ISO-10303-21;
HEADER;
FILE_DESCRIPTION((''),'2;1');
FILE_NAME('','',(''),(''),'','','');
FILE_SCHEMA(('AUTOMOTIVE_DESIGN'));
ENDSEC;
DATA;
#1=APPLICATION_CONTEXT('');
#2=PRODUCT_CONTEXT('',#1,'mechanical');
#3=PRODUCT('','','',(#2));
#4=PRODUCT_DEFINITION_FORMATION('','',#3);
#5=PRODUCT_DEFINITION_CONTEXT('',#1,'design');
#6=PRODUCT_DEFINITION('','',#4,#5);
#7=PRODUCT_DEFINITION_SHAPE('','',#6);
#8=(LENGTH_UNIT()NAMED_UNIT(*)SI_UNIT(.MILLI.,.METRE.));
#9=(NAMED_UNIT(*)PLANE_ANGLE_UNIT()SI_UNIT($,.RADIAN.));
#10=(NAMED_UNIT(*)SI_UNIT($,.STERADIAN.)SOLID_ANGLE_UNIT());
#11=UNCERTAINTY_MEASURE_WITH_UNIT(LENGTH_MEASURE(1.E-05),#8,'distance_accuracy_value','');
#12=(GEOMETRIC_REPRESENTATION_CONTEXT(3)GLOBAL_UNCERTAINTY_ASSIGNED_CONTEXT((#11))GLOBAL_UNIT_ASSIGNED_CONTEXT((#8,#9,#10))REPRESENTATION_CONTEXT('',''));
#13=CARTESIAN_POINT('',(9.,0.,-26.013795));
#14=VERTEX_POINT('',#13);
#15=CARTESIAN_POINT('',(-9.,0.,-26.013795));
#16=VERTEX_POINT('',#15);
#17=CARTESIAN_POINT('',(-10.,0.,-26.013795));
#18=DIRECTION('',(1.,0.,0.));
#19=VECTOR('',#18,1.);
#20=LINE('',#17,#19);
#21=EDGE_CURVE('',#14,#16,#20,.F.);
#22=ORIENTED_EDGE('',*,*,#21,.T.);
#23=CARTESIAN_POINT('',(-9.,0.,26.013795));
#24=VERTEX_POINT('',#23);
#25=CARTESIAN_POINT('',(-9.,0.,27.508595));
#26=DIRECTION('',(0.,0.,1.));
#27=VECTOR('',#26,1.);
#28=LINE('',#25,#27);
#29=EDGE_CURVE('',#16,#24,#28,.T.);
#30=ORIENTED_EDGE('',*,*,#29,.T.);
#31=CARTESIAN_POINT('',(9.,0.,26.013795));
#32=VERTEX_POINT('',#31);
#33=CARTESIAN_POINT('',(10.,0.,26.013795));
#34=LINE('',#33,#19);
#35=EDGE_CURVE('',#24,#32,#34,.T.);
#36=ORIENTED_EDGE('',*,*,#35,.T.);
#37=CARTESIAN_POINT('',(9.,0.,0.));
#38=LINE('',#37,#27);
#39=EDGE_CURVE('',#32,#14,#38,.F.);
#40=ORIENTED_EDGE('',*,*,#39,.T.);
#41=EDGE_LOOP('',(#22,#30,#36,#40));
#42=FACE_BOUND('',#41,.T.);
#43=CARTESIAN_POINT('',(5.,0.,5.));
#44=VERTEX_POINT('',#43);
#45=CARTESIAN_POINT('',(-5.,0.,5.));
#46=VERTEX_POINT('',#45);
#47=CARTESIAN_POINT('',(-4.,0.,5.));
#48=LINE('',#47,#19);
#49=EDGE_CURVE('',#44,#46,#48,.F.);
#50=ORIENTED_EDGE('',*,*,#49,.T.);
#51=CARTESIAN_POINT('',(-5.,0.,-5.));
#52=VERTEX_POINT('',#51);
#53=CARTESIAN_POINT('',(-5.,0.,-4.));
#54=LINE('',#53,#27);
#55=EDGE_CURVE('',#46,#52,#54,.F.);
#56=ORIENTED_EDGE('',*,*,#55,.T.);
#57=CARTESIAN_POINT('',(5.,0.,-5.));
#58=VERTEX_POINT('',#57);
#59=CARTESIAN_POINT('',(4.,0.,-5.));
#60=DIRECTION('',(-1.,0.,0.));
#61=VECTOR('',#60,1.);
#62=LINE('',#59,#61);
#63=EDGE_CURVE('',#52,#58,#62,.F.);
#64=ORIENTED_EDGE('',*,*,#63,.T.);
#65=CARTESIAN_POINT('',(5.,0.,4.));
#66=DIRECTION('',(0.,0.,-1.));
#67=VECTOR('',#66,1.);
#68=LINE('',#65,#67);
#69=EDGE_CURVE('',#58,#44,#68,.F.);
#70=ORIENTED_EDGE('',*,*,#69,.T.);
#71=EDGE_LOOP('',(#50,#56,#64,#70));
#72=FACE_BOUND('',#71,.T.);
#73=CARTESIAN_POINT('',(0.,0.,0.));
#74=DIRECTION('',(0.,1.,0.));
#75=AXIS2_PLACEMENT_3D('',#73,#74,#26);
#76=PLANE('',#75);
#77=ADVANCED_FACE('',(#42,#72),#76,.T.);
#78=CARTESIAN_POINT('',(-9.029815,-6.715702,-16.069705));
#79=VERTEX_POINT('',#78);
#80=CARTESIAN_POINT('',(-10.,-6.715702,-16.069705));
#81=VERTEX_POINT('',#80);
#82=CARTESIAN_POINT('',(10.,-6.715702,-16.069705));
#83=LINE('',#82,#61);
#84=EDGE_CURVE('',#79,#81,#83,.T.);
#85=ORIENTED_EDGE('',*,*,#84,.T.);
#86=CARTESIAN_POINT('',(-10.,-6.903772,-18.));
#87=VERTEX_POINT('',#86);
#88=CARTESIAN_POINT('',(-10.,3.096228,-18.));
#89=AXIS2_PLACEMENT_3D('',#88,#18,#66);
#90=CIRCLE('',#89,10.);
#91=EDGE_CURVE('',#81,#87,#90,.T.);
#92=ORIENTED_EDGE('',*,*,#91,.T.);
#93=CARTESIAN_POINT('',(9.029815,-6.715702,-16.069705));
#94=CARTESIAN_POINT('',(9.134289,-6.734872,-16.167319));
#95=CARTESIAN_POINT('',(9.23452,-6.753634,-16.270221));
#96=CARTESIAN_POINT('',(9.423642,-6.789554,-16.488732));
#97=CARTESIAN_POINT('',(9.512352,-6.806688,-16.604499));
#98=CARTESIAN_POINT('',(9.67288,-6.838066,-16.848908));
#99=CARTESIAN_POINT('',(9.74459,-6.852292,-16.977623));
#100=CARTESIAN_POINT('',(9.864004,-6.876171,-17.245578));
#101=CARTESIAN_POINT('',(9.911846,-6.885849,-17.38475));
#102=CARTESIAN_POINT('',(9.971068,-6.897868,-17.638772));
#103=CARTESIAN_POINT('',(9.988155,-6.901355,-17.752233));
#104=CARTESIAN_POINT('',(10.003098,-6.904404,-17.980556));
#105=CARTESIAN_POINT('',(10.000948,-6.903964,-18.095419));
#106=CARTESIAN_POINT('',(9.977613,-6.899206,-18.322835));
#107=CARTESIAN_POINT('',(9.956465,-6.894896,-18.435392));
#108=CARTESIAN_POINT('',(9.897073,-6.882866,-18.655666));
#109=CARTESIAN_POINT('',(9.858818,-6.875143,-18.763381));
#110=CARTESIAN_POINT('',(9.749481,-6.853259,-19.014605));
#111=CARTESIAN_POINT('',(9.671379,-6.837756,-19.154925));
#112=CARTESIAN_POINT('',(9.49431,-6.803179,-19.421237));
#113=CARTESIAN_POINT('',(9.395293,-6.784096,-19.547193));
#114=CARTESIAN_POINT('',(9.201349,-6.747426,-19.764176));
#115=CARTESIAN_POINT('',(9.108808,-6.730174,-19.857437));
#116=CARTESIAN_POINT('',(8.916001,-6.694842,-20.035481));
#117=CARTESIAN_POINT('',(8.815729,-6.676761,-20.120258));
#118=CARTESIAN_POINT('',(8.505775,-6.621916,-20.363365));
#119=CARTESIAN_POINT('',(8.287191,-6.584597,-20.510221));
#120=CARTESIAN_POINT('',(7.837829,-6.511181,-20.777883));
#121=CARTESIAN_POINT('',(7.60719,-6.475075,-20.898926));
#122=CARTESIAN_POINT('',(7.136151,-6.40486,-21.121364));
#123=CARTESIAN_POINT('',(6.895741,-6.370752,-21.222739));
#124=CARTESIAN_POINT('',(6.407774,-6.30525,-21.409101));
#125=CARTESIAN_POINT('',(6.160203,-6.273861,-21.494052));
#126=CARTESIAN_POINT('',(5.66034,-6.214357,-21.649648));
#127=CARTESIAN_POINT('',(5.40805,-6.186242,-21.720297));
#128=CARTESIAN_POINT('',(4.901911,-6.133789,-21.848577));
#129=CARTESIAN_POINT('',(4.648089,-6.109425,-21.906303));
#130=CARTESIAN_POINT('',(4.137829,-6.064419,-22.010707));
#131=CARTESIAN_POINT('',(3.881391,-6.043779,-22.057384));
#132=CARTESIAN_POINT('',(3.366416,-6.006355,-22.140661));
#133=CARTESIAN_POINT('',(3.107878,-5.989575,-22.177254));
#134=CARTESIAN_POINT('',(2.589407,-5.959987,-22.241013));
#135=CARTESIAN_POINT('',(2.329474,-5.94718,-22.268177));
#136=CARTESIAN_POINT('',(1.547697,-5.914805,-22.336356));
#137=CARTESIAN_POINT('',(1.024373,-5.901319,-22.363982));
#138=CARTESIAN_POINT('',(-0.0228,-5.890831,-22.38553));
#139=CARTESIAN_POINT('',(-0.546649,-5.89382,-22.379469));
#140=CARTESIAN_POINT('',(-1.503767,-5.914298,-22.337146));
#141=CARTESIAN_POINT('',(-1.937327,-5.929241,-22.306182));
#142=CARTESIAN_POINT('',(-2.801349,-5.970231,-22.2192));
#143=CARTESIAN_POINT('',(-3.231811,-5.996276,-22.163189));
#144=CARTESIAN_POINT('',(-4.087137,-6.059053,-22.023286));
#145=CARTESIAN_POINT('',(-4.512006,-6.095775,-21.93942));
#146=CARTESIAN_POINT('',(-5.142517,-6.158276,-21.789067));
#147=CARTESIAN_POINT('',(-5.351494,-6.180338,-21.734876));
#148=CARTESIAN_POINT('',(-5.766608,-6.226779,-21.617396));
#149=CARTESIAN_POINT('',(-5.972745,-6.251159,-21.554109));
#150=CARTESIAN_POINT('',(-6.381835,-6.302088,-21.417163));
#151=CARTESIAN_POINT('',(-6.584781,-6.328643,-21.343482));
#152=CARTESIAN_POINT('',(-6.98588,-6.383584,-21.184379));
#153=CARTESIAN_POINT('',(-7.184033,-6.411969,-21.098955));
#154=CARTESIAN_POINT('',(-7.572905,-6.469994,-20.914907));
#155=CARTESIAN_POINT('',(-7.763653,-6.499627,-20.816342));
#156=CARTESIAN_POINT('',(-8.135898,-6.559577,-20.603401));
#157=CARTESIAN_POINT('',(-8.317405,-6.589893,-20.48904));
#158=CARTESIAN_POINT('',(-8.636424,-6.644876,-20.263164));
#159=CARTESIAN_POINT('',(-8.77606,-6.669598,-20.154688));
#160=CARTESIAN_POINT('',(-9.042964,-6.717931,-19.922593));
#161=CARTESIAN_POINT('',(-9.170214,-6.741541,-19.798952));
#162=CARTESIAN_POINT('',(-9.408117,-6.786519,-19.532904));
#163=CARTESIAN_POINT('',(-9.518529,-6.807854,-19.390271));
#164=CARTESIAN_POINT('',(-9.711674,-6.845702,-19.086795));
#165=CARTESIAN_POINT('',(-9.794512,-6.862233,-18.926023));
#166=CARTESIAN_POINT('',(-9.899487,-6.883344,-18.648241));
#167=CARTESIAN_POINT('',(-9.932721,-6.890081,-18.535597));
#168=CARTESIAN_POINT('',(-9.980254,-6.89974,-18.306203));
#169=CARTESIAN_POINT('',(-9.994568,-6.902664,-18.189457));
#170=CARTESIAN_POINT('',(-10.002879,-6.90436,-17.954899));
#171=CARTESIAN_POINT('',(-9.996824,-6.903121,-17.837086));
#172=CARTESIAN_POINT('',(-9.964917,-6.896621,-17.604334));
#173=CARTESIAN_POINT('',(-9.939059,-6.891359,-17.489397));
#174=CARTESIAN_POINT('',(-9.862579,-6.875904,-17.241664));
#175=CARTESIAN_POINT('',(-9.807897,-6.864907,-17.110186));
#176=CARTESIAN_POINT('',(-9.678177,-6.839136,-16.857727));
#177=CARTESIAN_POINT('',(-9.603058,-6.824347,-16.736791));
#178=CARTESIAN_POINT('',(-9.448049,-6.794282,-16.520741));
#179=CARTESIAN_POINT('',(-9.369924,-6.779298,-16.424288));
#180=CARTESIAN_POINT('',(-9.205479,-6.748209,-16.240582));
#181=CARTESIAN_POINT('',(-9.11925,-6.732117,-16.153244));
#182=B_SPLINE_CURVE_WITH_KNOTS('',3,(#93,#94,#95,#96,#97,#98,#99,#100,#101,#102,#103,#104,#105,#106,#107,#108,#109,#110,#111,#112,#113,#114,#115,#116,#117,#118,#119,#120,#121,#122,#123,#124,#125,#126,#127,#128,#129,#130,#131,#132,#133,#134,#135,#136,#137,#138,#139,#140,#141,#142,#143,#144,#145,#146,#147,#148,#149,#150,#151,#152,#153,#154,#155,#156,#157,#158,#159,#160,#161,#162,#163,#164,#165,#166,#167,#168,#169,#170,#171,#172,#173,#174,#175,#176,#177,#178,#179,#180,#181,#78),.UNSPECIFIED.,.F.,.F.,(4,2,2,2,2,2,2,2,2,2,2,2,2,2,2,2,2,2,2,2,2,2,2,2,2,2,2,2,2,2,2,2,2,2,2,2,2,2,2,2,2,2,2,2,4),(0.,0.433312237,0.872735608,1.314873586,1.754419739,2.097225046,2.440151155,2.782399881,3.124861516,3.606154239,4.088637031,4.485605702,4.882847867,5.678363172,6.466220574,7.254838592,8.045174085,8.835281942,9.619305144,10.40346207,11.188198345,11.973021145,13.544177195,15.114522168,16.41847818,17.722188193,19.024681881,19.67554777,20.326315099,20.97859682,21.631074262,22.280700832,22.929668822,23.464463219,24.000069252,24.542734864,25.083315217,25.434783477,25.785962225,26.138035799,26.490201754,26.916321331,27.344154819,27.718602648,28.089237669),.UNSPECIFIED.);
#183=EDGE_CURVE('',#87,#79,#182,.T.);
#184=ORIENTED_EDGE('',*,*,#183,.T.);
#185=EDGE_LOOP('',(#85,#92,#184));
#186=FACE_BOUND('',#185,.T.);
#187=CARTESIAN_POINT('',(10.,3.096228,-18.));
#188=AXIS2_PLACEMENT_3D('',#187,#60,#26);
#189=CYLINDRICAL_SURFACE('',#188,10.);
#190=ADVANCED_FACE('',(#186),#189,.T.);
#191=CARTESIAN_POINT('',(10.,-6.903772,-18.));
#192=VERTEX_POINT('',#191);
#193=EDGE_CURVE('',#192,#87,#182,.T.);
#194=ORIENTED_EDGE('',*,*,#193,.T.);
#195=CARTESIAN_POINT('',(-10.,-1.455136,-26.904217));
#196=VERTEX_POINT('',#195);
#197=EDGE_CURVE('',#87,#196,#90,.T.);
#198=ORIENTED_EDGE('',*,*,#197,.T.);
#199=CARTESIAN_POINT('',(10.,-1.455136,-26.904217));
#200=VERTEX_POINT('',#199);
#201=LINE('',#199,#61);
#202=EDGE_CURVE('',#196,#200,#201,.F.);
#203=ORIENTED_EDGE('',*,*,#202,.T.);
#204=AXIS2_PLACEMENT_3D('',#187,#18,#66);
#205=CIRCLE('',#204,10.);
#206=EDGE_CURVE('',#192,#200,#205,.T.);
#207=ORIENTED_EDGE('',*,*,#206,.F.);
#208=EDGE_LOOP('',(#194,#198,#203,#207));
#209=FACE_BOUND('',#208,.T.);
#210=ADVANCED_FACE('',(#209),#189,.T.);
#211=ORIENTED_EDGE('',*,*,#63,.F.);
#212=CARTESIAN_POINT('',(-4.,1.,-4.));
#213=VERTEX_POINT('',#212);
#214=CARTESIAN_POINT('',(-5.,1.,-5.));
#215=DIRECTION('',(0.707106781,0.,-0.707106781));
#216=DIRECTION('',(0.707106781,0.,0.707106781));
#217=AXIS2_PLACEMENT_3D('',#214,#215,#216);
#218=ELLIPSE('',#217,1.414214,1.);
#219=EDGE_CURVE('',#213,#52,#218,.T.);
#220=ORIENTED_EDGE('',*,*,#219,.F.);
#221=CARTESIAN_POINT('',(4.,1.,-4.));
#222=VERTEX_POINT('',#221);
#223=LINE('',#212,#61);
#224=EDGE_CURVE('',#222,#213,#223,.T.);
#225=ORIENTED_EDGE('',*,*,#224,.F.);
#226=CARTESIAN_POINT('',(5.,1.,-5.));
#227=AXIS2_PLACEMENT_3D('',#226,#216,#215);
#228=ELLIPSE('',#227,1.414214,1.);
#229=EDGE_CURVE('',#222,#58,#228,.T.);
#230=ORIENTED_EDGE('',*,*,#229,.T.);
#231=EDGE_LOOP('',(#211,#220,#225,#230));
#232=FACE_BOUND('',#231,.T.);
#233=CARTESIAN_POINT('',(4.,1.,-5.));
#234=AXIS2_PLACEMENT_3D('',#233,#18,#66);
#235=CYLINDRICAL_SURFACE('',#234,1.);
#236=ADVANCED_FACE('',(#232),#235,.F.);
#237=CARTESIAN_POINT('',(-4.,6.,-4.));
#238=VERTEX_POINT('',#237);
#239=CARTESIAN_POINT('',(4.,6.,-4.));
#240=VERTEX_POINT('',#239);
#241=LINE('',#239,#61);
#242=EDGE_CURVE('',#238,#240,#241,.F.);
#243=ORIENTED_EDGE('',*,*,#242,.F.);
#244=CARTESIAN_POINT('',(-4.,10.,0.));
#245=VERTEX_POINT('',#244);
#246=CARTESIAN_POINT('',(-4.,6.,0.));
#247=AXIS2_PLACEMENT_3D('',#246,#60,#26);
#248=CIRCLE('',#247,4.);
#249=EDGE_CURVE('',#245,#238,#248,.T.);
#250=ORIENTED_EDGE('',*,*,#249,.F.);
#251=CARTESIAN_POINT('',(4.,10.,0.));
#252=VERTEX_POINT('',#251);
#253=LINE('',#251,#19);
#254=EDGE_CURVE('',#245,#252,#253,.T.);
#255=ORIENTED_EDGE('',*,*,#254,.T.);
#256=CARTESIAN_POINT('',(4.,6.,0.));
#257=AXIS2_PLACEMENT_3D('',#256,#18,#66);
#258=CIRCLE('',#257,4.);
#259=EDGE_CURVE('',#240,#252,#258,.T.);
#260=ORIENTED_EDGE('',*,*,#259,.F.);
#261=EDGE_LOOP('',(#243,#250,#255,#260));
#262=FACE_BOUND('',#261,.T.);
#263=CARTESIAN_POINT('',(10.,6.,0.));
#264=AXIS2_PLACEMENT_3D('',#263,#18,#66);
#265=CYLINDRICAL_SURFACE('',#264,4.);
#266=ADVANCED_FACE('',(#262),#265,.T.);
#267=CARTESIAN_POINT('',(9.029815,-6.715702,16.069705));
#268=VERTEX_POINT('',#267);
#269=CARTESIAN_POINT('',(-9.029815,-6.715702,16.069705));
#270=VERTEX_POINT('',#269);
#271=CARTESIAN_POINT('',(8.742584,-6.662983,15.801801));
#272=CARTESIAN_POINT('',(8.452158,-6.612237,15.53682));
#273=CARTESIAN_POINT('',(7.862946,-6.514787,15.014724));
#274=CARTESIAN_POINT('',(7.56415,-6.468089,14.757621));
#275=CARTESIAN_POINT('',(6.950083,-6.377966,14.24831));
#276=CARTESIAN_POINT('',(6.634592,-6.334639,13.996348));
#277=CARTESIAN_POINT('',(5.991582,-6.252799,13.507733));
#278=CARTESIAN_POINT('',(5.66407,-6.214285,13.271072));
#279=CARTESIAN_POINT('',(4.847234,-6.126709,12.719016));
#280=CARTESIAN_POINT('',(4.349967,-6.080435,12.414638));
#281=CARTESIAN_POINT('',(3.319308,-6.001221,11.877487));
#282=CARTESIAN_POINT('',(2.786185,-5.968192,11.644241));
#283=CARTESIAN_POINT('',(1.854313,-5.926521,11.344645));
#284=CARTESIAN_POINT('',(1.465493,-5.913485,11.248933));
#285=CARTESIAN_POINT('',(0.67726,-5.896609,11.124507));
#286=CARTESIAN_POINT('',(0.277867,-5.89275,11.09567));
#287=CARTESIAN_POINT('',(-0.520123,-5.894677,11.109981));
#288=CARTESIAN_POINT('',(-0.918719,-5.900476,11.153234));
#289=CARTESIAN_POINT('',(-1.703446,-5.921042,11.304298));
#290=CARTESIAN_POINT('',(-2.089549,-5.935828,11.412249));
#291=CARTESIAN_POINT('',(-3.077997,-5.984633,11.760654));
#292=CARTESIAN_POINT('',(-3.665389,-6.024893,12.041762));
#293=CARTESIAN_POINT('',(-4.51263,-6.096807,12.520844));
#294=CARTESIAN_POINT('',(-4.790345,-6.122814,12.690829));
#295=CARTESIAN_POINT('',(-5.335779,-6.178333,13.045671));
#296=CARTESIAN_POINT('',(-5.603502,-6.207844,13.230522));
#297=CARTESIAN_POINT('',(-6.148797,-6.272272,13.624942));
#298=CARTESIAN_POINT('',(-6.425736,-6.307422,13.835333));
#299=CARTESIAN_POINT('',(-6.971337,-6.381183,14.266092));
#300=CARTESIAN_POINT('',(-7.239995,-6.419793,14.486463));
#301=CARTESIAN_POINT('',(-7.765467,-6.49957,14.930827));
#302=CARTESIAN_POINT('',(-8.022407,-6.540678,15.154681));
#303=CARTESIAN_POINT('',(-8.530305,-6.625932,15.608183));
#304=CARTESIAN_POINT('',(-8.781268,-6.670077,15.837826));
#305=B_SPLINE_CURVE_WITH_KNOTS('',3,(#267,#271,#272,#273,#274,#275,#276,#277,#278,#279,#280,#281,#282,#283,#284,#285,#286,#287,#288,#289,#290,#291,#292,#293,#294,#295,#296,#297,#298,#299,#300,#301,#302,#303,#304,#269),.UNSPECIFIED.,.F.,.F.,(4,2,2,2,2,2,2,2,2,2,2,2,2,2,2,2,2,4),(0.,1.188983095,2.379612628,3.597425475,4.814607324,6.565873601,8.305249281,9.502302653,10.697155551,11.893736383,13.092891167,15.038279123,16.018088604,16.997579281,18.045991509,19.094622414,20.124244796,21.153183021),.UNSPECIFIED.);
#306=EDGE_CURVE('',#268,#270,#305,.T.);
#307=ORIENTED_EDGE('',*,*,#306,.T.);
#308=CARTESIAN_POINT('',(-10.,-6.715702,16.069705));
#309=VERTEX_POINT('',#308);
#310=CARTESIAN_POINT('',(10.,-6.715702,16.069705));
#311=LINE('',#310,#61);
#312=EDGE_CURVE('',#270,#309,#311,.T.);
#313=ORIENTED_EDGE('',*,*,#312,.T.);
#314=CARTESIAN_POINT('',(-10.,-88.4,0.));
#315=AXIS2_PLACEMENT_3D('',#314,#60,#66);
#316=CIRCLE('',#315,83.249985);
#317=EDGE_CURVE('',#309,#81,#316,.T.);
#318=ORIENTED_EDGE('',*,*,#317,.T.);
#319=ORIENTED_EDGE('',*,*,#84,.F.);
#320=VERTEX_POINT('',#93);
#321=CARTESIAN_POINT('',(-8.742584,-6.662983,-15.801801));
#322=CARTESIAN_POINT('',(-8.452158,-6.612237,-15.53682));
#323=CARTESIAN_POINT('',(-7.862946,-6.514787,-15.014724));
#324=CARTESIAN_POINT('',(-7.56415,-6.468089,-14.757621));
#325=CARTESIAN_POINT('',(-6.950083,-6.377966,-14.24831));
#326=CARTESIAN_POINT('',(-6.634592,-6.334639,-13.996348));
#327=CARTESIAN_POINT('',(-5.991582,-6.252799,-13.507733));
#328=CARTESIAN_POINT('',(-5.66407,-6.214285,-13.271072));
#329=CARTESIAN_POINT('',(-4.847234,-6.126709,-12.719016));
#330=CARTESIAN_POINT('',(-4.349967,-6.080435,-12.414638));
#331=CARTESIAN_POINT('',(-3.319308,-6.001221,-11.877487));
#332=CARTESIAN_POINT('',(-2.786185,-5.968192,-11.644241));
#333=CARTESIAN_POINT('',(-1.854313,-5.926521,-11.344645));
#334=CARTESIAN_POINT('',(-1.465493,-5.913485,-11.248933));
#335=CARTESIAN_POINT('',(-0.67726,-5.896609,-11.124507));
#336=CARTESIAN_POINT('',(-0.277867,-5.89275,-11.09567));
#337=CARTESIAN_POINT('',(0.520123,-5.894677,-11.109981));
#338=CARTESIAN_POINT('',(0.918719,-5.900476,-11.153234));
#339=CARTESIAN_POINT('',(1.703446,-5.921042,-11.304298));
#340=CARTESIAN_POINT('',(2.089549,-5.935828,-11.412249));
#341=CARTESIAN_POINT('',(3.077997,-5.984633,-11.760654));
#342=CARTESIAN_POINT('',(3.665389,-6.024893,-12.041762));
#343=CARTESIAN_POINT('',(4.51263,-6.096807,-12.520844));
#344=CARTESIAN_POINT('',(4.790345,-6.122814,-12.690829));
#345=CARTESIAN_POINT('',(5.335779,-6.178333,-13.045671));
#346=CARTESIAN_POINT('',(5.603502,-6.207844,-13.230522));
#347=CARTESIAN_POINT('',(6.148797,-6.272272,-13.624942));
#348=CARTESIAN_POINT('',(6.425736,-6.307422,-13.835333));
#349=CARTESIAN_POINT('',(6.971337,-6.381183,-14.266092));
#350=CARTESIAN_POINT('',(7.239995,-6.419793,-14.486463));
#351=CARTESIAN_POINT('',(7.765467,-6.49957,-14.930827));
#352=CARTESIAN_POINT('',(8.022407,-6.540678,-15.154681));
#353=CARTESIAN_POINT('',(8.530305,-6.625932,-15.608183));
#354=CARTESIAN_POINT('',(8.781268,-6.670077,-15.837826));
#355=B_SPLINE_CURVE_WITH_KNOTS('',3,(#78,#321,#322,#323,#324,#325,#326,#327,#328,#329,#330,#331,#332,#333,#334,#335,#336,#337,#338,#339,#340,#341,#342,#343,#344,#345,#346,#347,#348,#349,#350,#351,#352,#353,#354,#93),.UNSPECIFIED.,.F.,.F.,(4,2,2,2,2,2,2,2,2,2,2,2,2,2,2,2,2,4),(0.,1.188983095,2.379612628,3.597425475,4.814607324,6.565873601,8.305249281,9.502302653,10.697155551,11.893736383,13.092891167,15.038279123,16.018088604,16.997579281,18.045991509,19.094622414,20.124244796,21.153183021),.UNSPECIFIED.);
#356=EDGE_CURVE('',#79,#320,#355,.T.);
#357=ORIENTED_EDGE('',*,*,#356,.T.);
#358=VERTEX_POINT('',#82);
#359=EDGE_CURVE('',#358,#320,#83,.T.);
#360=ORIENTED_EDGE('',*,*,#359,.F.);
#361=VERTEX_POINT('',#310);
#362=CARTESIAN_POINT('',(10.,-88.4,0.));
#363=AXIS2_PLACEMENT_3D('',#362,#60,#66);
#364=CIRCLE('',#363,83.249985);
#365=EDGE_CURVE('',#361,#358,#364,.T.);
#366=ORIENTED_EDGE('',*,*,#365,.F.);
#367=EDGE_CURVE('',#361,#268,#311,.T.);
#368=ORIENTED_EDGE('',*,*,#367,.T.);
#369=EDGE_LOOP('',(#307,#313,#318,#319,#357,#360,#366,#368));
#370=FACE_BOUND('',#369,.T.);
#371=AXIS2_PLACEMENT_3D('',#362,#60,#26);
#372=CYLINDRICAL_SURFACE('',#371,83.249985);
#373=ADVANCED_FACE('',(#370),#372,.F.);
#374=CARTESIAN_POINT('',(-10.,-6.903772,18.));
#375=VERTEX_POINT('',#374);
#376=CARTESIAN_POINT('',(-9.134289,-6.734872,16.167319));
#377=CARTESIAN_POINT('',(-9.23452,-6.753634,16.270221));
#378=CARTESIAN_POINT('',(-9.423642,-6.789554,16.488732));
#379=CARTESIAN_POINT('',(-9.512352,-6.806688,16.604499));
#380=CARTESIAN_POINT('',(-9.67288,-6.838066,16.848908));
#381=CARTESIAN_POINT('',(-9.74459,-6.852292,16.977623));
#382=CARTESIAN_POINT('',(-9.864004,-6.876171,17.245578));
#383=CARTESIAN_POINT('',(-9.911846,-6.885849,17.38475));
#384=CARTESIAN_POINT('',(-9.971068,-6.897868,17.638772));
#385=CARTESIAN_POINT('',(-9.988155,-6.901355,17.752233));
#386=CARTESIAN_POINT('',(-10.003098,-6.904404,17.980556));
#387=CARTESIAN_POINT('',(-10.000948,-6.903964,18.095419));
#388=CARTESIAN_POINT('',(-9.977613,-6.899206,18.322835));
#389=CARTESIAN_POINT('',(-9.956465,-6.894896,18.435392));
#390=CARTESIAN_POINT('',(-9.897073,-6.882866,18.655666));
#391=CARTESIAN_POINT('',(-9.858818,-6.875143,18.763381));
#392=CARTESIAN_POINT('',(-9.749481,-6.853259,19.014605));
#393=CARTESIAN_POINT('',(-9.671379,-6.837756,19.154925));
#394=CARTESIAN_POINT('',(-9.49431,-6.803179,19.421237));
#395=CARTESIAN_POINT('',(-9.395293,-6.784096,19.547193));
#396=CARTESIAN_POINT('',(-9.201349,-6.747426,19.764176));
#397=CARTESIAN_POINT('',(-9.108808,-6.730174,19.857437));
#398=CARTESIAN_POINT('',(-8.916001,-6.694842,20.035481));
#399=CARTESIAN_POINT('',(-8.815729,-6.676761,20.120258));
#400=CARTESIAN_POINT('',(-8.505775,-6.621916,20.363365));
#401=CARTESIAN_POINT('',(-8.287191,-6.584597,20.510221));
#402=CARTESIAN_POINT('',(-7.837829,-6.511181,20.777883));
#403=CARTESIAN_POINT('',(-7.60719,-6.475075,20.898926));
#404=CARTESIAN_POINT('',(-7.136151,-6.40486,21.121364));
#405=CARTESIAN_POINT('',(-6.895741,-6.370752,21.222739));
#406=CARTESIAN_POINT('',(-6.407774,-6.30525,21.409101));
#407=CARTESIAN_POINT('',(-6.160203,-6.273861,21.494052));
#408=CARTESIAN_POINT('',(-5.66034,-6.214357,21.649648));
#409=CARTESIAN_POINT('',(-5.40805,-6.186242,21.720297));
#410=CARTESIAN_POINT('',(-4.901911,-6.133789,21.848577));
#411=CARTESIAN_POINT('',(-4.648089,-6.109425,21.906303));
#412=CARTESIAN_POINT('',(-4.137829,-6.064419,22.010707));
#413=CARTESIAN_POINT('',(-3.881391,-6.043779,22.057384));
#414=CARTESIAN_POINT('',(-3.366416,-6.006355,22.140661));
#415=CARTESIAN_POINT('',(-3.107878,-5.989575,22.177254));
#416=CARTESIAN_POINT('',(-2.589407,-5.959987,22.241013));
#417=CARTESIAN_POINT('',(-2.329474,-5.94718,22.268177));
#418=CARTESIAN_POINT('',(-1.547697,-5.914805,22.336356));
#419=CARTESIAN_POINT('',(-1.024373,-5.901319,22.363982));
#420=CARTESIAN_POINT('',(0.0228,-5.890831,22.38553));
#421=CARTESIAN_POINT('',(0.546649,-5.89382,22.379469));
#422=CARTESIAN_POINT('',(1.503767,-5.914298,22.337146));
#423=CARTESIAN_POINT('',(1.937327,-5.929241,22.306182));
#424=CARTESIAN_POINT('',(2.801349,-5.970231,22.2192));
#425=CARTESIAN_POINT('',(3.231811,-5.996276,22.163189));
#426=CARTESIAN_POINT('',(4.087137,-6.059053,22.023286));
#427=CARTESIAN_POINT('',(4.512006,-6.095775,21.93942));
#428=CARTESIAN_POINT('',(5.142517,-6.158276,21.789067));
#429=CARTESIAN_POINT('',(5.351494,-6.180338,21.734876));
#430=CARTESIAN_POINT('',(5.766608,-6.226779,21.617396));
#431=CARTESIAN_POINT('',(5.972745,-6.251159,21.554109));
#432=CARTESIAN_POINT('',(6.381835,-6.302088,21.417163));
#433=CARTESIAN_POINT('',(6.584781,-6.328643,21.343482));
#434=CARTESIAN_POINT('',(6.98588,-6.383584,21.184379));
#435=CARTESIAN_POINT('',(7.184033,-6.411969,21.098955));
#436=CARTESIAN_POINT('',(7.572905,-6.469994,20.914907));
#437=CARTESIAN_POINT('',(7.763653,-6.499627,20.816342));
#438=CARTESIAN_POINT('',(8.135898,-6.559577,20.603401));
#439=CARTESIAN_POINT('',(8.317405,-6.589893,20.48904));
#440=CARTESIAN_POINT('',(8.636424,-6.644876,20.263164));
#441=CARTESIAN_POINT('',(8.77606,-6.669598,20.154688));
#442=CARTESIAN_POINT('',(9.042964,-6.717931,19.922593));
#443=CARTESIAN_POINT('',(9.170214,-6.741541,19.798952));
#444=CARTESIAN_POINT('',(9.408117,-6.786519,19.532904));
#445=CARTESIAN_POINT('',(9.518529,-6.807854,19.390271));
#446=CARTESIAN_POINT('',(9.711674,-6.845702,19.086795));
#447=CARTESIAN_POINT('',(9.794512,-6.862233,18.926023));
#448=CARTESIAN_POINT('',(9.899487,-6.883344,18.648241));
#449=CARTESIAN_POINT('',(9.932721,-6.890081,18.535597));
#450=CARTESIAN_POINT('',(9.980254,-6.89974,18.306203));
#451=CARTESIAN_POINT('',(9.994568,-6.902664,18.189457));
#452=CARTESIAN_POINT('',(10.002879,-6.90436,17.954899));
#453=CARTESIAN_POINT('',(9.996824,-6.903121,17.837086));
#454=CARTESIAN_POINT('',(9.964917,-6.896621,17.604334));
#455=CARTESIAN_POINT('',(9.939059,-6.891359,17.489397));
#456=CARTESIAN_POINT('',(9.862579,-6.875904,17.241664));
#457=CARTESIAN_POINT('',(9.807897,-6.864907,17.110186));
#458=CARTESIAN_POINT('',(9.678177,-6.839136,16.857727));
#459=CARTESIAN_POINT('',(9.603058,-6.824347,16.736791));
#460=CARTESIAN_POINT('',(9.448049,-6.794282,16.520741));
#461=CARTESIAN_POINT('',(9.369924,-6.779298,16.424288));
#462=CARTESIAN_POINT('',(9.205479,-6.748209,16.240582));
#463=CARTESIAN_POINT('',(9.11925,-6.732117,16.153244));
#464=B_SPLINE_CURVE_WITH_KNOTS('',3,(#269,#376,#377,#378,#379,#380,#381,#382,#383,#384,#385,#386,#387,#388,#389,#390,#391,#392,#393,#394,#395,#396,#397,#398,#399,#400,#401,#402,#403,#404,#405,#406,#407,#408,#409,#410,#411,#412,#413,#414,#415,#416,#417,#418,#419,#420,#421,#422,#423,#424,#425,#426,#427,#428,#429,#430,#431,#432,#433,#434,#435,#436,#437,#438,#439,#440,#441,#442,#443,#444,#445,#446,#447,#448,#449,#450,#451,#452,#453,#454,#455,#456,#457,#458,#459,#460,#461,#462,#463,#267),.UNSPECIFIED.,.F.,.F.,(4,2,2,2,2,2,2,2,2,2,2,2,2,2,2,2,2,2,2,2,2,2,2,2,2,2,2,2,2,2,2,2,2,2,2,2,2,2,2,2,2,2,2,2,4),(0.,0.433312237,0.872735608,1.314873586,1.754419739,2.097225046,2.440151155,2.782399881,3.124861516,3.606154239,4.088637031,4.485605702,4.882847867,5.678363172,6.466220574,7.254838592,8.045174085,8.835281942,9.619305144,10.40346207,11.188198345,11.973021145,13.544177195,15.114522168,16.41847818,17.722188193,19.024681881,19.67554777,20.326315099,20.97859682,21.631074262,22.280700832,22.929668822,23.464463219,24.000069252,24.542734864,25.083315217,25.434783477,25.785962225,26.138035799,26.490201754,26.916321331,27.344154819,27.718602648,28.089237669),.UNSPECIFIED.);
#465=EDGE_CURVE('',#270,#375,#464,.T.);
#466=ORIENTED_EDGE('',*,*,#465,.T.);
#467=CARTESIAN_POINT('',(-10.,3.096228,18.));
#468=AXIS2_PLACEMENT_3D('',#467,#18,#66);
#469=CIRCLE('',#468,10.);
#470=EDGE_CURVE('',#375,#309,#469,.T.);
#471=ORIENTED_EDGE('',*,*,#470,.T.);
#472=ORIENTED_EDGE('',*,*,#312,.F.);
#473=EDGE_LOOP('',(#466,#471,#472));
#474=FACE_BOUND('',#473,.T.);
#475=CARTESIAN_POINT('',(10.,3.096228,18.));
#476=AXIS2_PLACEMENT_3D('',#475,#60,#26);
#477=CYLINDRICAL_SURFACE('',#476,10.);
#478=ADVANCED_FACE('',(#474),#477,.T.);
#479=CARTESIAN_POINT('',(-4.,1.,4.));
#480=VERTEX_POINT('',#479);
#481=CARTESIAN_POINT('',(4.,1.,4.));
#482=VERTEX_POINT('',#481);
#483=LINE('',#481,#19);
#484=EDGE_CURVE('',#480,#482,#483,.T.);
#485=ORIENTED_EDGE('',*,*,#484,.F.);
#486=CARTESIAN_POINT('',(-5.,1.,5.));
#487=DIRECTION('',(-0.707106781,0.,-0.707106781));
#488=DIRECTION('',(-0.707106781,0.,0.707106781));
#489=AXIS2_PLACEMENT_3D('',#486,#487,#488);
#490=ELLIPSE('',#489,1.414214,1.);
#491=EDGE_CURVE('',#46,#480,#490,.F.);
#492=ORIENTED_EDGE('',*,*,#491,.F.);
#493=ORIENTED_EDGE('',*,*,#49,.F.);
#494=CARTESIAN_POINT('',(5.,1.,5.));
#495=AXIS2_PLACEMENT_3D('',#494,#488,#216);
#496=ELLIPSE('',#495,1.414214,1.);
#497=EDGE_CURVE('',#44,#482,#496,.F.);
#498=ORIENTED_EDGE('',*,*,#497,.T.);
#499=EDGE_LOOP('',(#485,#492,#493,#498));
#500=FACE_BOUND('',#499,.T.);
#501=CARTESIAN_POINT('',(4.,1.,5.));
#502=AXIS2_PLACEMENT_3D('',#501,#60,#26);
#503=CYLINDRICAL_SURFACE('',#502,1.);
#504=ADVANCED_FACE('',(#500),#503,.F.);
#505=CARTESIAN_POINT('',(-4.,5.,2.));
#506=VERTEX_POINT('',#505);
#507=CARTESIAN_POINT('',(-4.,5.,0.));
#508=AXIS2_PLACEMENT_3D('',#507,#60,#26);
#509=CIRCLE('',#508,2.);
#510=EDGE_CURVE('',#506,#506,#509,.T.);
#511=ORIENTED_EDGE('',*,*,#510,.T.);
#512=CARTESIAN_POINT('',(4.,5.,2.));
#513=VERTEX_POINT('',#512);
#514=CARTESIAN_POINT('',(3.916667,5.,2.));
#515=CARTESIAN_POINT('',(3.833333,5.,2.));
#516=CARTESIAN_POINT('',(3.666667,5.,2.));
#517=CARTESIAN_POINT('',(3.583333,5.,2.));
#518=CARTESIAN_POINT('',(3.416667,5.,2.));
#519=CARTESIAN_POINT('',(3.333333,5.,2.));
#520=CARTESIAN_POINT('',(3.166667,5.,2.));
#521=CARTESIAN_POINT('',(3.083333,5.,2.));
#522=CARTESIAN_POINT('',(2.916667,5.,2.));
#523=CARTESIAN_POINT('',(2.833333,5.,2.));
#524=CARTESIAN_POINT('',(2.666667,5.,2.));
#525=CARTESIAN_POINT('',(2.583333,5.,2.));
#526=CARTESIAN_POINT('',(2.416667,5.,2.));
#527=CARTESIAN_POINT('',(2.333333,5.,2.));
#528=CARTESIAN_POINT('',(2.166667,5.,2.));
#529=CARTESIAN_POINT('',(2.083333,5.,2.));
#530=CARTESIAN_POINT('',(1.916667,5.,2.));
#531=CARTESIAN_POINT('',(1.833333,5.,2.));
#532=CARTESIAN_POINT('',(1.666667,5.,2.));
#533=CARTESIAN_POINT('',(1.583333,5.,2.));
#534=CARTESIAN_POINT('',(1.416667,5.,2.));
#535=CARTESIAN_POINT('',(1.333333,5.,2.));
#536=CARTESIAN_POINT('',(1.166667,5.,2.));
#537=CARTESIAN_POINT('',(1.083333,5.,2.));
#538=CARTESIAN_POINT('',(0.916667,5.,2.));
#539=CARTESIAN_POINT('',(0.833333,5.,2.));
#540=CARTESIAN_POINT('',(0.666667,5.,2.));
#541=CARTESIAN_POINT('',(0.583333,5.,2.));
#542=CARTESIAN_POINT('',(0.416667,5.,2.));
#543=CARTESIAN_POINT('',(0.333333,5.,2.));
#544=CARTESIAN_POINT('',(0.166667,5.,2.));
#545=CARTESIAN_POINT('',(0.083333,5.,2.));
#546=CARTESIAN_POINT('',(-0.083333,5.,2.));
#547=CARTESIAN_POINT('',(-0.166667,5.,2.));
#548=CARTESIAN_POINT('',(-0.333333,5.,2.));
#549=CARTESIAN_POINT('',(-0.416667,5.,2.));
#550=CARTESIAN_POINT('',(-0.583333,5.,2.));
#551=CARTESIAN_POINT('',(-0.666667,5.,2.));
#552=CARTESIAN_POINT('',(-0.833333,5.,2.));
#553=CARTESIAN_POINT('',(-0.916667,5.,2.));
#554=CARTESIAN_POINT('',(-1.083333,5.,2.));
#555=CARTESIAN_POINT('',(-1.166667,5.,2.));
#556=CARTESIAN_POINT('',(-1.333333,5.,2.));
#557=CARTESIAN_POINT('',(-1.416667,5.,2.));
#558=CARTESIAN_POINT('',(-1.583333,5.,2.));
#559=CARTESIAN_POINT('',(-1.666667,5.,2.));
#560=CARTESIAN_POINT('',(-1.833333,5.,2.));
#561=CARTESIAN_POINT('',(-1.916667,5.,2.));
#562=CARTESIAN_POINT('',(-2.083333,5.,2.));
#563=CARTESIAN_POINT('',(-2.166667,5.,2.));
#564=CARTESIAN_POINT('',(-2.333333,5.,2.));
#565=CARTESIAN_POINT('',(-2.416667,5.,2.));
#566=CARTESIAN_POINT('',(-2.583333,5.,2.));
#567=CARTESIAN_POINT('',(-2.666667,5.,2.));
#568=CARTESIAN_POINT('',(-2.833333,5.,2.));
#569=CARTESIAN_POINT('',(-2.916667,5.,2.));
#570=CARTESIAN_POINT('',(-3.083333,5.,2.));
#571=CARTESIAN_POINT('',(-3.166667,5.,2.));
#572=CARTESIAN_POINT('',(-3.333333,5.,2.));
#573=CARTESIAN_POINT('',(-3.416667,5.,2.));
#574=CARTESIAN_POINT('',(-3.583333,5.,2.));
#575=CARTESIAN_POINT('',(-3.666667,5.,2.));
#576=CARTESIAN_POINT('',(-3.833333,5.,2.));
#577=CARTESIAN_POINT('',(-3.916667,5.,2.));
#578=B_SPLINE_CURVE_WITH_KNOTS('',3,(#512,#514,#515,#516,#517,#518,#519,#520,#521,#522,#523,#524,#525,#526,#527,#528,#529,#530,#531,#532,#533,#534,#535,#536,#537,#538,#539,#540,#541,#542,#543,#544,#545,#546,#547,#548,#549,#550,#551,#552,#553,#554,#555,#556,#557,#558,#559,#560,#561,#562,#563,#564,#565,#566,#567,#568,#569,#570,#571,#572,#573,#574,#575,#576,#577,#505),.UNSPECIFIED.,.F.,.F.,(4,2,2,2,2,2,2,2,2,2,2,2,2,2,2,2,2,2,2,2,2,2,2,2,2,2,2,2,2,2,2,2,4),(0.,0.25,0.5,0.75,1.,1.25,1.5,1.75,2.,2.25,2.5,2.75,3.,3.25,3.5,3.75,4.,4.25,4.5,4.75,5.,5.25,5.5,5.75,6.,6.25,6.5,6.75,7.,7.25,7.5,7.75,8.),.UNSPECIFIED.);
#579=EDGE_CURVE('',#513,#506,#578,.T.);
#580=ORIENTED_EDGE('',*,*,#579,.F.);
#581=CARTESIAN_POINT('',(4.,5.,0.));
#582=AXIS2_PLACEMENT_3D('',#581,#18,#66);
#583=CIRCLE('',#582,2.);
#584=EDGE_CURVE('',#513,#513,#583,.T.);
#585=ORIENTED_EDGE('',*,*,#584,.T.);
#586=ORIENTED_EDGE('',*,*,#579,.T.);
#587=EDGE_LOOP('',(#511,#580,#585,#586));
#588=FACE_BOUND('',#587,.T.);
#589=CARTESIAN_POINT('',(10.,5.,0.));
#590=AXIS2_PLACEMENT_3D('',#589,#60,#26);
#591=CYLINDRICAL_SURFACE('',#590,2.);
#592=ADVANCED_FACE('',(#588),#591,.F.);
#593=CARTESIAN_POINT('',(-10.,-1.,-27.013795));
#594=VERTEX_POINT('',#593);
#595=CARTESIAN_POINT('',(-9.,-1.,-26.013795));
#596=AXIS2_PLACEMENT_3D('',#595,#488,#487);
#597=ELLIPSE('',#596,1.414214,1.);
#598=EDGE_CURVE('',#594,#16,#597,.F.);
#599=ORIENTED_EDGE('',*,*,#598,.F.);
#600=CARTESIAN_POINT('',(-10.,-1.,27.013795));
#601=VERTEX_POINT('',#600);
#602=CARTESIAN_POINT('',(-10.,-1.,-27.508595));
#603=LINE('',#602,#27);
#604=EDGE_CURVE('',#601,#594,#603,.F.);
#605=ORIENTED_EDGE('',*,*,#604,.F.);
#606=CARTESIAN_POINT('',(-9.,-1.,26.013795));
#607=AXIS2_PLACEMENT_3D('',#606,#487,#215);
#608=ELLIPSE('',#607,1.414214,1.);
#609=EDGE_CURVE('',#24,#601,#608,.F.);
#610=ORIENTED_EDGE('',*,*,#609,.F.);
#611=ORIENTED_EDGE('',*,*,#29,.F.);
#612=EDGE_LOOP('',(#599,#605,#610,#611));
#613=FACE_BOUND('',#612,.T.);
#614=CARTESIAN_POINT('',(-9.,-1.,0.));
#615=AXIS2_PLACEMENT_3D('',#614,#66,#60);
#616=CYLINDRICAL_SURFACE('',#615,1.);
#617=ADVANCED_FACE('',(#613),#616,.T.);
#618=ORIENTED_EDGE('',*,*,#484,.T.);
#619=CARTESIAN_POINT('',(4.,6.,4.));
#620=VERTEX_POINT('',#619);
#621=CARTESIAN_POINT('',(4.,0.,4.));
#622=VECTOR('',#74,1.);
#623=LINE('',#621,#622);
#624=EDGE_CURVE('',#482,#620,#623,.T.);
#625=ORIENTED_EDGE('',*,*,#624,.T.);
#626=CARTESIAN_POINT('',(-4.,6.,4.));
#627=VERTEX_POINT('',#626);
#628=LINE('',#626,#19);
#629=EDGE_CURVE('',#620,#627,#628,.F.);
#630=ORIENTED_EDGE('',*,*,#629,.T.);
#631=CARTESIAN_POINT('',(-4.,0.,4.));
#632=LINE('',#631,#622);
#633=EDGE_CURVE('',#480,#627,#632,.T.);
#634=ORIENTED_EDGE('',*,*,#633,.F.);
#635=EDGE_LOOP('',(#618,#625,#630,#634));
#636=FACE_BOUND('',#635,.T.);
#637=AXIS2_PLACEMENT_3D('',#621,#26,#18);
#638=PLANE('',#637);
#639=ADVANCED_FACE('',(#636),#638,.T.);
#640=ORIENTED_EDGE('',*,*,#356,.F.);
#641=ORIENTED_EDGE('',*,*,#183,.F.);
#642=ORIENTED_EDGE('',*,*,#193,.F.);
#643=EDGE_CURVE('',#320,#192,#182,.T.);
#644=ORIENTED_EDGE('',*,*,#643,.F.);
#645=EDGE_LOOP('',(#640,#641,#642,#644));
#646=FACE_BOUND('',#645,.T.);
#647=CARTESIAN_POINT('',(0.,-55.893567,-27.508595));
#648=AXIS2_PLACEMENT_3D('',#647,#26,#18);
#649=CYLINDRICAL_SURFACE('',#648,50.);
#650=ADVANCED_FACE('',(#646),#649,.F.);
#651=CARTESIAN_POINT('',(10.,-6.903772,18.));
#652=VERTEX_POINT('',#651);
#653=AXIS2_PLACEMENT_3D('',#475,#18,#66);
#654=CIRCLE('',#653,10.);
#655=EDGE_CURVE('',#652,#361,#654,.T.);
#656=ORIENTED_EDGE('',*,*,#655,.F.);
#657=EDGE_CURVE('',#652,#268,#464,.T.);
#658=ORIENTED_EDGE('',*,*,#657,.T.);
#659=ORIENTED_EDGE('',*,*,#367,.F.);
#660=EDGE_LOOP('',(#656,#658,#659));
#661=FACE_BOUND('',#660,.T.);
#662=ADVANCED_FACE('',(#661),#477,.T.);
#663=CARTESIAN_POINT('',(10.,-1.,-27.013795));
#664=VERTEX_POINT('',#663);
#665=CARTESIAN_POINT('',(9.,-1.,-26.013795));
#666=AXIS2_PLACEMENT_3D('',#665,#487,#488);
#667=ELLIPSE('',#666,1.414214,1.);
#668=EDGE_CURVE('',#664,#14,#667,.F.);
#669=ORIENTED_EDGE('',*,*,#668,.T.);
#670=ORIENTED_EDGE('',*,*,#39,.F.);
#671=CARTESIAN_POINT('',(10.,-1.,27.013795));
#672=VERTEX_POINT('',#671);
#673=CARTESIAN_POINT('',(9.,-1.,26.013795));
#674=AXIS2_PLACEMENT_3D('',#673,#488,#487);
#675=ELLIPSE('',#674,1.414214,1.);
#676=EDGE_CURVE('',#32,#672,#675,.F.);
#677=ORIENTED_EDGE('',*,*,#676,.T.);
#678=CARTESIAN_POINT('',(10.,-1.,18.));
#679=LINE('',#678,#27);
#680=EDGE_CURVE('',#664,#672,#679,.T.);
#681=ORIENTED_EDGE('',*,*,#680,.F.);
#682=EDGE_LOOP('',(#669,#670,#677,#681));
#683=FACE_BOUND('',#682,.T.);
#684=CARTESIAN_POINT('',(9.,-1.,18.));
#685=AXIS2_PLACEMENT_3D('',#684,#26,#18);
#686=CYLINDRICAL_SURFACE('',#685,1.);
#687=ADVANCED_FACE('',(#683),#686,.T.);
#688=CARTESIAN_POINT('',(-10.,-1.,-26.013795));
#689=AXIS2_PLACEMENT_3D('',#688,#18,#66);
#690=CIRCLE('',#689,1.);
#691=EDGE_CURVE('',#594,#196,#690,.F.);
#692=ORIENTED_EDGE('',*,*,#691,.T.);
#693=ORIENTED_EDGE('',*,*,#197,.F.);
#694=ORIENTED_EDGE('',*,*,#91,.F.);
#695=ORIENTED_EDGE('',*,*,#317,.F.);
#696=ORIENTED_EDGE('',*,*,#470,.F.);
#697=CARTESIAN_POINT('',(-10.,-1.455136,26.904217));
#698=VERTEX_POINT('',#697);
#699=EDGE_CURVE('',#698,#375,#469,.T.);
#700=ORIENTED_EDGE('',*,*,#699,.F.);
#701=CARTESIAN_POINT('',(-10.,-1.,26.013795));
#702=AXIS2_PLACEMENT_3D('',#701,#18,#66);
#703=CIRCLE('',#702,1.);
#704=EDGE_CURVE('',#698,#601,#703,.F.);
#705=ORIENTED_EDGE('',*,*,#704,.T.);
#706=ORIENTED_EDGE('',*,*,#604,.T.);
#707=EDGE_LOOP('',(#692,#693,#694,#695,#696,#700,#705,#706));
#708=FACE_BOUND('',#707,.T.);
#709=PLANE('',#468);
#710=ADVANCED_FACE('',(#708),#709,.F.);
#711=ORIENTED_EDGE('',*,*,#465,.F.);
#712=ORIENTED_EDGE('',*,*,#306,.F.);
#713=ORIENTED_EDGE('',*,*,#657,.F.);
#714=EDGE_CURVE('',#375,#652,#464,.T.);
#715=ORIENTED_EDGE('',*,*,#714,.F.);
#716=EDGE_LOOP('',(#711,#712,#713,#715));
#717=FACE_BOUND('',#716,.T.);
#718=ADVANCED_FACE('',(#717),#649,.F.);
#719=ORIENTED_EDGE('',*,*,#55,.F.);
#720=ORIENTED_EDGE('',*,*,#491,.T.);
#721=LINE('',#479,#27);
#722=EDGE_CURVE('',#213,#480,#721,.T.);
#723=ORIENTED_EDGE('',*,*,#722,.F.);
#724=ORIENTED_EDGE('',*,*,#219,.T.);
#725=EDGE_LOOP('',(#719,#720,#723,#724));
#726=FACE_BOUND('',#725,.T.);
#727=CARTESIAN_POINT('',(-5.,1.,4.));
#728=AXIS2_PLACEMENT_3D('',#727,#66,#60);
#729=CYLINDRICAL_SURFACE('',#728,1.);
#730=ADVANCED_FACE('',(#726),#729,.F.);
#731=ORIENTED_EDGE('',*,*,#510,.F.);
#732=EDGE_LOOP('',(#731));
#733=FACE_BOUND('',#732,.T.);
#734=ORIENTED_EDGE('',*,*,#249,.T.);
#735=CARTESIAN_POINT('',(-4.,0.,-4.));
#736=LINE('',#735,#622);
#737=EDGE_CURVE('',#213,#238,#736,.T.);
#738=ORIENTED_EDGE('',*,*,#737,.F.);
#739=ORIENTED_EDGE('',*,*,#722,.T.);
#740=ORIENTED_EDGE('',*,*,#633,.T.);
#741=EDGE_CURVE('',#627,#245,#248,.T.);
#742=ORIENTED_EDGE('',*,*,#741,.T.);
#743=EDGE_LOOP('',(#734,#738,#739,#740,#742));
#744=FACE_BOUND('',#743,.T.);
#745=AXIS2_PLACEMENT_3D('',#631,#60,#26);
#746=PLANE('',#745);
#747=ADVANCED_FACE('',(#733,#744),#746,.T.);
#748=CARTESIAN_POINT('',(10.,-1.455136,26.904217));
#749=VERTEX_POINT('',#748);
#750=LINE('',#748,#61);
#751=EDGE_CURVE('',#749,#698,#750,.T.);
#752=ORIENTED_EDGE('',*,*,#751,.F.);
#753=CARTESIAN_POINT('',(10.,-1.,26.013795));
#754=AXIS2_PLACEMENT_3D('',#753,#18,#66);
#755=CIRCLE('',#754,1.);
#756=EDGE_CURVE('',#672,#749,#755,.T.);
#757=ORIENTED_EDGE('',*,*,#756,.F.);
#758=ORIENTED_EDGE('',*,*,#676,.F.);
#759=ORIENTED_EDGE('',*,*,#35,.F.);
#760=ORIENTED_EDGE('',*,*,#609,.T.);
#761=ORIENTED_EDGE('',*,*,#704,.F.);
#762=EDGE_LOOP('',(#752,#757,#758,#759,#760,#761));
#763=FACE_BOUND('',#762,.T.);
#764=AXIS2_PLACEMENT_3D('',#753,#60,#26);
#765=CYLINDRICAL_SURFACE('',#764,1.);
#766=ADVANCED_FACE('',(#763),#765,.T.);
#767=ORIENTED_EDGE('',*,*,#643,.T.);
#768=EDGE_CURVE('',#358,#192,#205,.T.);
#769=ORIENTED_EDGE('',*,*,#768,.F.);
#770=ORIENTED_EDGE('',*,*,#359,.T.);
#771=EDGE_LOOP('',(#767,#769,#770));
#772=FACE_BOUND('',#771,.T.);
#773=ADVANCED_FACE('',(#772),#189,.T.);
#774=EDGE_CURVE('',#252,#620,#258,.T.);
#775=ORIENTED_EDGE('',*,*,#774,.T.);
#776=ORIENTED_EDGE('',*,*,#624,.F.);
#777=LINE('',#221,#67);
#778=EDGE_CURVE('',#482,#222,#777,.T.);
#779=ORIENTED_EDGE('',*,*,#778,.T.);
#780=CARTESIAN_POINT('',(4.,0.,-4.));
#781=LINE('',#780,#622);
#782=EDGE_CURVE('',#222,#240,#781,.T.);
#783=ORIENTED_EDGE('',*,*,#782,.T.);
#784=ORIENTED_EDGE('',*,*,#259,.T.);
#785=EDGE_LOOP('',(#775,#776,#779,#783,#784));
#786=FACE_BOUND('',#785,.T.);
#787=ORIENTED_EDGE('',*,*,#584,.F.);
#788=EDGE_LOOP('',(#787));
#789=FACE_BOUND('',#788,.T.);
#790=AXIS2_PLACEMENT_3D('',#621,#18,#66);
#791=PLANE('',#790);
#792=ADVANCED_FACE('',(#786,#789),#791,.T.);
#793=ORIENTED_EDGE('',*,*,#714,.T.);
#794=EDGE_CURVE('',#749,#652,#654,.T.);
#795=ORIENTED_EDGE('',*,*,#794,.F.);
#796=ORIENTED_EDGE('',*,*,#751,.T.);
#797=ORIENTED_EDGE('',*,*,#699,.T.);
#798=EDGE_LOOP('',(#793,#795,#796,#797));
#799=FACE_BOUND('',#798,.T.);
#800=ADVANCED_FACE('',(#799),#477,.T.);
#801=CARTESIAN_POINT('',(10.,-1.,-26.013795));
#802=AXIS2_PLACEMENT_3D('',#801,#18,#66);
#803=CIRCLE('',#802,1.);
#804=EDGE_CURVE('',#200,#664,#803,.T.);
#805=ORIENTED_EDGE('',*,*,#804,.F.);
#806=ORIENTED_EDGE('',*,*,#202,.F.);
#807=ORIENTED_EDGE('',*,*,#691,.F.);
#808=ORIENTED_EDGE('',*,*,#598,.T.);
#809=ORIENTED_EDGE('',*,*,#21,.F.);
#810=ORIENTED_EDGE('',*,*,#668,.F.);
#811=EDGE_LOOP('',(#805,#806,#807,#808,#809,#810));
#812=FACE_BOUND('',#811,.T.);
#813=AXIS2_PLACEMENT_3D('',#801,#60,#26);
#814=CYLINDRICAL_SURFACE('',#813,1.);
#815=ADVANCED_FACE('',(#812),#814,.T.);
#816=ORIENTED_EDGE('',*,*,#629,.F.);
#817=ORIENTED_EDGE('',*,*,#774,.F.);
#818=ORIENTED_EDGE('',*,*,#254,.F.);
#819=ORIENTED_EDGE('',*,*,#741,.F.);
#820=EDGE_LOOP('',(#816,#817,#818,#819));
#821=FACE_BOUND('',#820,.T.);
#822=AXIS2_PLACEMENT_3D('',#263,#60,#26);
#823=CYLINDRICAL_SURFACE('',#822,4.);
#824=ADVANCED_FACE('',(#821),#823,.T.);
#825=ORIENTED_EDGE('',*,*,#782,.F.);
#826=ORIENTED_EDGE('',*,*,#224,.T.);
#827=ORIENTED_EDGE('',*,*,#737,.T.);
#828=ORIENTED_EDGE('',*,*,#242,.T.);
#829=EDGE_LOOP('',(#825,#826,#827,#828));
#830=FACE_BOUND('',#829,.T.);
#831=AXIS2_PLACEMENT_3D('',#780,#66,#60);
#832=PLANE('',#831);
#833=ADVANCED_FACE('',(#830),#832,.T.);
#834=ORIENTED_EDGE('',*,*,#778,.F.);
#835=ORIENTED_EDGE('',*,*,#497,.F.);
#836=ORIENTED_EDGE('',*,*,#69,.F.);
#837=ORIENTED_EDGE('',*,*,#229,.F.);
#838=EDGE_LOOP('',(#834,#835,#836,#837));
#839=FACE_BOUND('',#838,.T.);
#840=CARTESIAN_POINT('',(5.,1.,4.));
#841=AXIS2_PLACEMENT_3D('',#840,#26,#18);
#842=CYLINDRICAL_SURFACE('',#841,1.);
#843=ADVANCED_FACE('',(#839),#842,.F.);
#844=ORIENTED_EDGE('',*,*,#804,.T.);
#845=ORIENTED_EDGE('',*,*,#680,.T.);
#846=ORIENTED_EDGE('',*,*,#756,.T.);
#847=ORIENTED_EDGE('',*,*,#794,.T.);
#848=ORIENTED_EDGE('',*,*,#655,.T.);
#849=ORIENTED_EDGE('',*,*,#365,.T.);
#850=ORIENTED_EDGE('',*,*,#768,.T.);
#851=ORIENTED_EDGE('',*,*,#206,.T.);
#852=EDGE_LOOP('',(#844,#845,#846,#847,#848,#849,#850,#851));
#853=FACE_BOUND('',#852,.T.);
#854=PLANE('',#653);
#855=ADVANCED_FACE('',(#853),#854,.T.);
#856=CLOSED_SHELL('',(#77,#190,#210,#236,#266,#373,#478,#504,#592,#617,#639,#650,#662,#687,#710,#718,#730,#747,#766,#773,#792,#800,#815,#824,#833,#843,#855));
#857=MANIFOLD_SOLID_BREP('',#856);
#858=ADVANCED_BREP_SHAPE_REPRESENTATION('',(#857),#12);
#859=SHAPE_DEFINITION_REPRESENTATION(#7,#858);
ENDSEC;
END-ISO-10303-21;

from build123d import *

# Parameters (mm, degrees)
SALIENTE_EXTRUIR1_DEPTH    = 10
CROQUIS2_OUTSIDE_W         = 34.364
CROQUIS2_OUTSIDE_H         = 70.364
CROQUIS2_OUTSIDE_W_2       = 8
CROQUIS2_OUTSIDE_H_2       = 8
CORTAR_EXTRUIR2_DEPTH      = 10
CROQUIS3_R                 = 2
CORTAR_EXTRUIR3_DEPTH      = 33.445689749
CORTAR_EXTRUIR4_DEPTH      = 31.9309357
CORTAR_EXTRUIR4_DEPTH_BACK = 31.9309357
CROQUIS6_R                 = 50
REDONDEO1_R                = 1
REDONDEO3_R                = 4


with BuildPart() as part:
    # Croquis1 → Saliente-Extruir1 (new, symmetric)
    with BuildSketch(Plane(origin=(0, 0, 0), x_dir=(0, 0, -1), z_dir=(1, 0, 0))):
        with BuildLine():
            Line((-28, 10), (28, 10))
            Line((28, 10), (28, 3.096227789))
            ThreePointArc((28, 3.096227789), (24.352048797, -4.627209016), (16.069704783, -6.715701704))
            ThreePointArc((16.069704783, -6.715701704), (0, -5.150015015), (-16.069704783, -6.715701704))
            ThreePointArc((-16.069704783, -6.715701704), (-24.352048797, -4.627209016), (-28, 3.096227789))
            Line((-28, 3.096227789), (-28, 10))
        make_face()
    extrude(amount=SALIENTE_EXTRUIR1_DEPTH, both=True)

    # Croquis2 outside → Cortar-Extruir2 (cut)
    with BuildSketch(Plane(origin=(0, 10, 0), x_dir=(1, 0, 0), z_dir=(0, 1, 0))):
        Rectangle(CROQUIS2_OUTSIDE_W, CROQUIS2_OUTSIDE_H)
        Rectangle(CROQUIS2_OUTSIDE_W_2, CROQUIS2_OUTSIDE_H_2, mode=Mode.SUBTRACT)
    extrude(amount=-CORTAR_EXTRUIR2_DEPTH, mode=Mode.SUBTRACT)

    # Croquis3 → Cortar-Extruir3 (cut, through all)
    with BuildSketch(Plane.ZY.offset(4)):
        with Locations((0, 5)):
            Circle(CROQUIS3_R)
    extrude(amount=-CORTAR_EXTRUIR3_DEPTH, mode=Mode.SUBTRACT)

    # Croquis6 → Cortar-Extruir4 (cut, two sides: drawn at the far end of the back side and taken through both)
    with BuildSketch(Plane.XY.offset(-CORTAR_EXTRUIR4_DEPTH_BACK)):
        with Locations((0, -55.893567066)):
            Circle(CROQUIS6_R)
    extrude(amount=CORTAR_EXTRUIR4_DEPTH + CORTAR_EXTRUIR4_DEPTH_BACK, mode=Mode.SUBTRACT)

    # Redondeo1
    redondeo1_edges = [part.edges().sort_by_distance(p)[0] for p in [
        (-10, 0, 0),
        (0, 0, -27.508594716),
        (0, 0, 27.508594716),
        (10, 0, 0),
        (0, 0, -4),
        (-4, 0, 0),
        (0, 0, 4),
        (4, 0, 0),
    ]]
    fillet(redondeo1_edges, radius=REDONDEO1_R)

    # Redondeo3
    redondeo3_edges = [part.edges().sort_by_distance(p)[0] for p in [
        (0, 10, -4),
        (0, 10, 4),
    ]]
    fillet(redondeo3_edges, radius=REDONDEO3_R - 0.0001)  # a hair under: the kernel refuses the full size


solid = part.part
